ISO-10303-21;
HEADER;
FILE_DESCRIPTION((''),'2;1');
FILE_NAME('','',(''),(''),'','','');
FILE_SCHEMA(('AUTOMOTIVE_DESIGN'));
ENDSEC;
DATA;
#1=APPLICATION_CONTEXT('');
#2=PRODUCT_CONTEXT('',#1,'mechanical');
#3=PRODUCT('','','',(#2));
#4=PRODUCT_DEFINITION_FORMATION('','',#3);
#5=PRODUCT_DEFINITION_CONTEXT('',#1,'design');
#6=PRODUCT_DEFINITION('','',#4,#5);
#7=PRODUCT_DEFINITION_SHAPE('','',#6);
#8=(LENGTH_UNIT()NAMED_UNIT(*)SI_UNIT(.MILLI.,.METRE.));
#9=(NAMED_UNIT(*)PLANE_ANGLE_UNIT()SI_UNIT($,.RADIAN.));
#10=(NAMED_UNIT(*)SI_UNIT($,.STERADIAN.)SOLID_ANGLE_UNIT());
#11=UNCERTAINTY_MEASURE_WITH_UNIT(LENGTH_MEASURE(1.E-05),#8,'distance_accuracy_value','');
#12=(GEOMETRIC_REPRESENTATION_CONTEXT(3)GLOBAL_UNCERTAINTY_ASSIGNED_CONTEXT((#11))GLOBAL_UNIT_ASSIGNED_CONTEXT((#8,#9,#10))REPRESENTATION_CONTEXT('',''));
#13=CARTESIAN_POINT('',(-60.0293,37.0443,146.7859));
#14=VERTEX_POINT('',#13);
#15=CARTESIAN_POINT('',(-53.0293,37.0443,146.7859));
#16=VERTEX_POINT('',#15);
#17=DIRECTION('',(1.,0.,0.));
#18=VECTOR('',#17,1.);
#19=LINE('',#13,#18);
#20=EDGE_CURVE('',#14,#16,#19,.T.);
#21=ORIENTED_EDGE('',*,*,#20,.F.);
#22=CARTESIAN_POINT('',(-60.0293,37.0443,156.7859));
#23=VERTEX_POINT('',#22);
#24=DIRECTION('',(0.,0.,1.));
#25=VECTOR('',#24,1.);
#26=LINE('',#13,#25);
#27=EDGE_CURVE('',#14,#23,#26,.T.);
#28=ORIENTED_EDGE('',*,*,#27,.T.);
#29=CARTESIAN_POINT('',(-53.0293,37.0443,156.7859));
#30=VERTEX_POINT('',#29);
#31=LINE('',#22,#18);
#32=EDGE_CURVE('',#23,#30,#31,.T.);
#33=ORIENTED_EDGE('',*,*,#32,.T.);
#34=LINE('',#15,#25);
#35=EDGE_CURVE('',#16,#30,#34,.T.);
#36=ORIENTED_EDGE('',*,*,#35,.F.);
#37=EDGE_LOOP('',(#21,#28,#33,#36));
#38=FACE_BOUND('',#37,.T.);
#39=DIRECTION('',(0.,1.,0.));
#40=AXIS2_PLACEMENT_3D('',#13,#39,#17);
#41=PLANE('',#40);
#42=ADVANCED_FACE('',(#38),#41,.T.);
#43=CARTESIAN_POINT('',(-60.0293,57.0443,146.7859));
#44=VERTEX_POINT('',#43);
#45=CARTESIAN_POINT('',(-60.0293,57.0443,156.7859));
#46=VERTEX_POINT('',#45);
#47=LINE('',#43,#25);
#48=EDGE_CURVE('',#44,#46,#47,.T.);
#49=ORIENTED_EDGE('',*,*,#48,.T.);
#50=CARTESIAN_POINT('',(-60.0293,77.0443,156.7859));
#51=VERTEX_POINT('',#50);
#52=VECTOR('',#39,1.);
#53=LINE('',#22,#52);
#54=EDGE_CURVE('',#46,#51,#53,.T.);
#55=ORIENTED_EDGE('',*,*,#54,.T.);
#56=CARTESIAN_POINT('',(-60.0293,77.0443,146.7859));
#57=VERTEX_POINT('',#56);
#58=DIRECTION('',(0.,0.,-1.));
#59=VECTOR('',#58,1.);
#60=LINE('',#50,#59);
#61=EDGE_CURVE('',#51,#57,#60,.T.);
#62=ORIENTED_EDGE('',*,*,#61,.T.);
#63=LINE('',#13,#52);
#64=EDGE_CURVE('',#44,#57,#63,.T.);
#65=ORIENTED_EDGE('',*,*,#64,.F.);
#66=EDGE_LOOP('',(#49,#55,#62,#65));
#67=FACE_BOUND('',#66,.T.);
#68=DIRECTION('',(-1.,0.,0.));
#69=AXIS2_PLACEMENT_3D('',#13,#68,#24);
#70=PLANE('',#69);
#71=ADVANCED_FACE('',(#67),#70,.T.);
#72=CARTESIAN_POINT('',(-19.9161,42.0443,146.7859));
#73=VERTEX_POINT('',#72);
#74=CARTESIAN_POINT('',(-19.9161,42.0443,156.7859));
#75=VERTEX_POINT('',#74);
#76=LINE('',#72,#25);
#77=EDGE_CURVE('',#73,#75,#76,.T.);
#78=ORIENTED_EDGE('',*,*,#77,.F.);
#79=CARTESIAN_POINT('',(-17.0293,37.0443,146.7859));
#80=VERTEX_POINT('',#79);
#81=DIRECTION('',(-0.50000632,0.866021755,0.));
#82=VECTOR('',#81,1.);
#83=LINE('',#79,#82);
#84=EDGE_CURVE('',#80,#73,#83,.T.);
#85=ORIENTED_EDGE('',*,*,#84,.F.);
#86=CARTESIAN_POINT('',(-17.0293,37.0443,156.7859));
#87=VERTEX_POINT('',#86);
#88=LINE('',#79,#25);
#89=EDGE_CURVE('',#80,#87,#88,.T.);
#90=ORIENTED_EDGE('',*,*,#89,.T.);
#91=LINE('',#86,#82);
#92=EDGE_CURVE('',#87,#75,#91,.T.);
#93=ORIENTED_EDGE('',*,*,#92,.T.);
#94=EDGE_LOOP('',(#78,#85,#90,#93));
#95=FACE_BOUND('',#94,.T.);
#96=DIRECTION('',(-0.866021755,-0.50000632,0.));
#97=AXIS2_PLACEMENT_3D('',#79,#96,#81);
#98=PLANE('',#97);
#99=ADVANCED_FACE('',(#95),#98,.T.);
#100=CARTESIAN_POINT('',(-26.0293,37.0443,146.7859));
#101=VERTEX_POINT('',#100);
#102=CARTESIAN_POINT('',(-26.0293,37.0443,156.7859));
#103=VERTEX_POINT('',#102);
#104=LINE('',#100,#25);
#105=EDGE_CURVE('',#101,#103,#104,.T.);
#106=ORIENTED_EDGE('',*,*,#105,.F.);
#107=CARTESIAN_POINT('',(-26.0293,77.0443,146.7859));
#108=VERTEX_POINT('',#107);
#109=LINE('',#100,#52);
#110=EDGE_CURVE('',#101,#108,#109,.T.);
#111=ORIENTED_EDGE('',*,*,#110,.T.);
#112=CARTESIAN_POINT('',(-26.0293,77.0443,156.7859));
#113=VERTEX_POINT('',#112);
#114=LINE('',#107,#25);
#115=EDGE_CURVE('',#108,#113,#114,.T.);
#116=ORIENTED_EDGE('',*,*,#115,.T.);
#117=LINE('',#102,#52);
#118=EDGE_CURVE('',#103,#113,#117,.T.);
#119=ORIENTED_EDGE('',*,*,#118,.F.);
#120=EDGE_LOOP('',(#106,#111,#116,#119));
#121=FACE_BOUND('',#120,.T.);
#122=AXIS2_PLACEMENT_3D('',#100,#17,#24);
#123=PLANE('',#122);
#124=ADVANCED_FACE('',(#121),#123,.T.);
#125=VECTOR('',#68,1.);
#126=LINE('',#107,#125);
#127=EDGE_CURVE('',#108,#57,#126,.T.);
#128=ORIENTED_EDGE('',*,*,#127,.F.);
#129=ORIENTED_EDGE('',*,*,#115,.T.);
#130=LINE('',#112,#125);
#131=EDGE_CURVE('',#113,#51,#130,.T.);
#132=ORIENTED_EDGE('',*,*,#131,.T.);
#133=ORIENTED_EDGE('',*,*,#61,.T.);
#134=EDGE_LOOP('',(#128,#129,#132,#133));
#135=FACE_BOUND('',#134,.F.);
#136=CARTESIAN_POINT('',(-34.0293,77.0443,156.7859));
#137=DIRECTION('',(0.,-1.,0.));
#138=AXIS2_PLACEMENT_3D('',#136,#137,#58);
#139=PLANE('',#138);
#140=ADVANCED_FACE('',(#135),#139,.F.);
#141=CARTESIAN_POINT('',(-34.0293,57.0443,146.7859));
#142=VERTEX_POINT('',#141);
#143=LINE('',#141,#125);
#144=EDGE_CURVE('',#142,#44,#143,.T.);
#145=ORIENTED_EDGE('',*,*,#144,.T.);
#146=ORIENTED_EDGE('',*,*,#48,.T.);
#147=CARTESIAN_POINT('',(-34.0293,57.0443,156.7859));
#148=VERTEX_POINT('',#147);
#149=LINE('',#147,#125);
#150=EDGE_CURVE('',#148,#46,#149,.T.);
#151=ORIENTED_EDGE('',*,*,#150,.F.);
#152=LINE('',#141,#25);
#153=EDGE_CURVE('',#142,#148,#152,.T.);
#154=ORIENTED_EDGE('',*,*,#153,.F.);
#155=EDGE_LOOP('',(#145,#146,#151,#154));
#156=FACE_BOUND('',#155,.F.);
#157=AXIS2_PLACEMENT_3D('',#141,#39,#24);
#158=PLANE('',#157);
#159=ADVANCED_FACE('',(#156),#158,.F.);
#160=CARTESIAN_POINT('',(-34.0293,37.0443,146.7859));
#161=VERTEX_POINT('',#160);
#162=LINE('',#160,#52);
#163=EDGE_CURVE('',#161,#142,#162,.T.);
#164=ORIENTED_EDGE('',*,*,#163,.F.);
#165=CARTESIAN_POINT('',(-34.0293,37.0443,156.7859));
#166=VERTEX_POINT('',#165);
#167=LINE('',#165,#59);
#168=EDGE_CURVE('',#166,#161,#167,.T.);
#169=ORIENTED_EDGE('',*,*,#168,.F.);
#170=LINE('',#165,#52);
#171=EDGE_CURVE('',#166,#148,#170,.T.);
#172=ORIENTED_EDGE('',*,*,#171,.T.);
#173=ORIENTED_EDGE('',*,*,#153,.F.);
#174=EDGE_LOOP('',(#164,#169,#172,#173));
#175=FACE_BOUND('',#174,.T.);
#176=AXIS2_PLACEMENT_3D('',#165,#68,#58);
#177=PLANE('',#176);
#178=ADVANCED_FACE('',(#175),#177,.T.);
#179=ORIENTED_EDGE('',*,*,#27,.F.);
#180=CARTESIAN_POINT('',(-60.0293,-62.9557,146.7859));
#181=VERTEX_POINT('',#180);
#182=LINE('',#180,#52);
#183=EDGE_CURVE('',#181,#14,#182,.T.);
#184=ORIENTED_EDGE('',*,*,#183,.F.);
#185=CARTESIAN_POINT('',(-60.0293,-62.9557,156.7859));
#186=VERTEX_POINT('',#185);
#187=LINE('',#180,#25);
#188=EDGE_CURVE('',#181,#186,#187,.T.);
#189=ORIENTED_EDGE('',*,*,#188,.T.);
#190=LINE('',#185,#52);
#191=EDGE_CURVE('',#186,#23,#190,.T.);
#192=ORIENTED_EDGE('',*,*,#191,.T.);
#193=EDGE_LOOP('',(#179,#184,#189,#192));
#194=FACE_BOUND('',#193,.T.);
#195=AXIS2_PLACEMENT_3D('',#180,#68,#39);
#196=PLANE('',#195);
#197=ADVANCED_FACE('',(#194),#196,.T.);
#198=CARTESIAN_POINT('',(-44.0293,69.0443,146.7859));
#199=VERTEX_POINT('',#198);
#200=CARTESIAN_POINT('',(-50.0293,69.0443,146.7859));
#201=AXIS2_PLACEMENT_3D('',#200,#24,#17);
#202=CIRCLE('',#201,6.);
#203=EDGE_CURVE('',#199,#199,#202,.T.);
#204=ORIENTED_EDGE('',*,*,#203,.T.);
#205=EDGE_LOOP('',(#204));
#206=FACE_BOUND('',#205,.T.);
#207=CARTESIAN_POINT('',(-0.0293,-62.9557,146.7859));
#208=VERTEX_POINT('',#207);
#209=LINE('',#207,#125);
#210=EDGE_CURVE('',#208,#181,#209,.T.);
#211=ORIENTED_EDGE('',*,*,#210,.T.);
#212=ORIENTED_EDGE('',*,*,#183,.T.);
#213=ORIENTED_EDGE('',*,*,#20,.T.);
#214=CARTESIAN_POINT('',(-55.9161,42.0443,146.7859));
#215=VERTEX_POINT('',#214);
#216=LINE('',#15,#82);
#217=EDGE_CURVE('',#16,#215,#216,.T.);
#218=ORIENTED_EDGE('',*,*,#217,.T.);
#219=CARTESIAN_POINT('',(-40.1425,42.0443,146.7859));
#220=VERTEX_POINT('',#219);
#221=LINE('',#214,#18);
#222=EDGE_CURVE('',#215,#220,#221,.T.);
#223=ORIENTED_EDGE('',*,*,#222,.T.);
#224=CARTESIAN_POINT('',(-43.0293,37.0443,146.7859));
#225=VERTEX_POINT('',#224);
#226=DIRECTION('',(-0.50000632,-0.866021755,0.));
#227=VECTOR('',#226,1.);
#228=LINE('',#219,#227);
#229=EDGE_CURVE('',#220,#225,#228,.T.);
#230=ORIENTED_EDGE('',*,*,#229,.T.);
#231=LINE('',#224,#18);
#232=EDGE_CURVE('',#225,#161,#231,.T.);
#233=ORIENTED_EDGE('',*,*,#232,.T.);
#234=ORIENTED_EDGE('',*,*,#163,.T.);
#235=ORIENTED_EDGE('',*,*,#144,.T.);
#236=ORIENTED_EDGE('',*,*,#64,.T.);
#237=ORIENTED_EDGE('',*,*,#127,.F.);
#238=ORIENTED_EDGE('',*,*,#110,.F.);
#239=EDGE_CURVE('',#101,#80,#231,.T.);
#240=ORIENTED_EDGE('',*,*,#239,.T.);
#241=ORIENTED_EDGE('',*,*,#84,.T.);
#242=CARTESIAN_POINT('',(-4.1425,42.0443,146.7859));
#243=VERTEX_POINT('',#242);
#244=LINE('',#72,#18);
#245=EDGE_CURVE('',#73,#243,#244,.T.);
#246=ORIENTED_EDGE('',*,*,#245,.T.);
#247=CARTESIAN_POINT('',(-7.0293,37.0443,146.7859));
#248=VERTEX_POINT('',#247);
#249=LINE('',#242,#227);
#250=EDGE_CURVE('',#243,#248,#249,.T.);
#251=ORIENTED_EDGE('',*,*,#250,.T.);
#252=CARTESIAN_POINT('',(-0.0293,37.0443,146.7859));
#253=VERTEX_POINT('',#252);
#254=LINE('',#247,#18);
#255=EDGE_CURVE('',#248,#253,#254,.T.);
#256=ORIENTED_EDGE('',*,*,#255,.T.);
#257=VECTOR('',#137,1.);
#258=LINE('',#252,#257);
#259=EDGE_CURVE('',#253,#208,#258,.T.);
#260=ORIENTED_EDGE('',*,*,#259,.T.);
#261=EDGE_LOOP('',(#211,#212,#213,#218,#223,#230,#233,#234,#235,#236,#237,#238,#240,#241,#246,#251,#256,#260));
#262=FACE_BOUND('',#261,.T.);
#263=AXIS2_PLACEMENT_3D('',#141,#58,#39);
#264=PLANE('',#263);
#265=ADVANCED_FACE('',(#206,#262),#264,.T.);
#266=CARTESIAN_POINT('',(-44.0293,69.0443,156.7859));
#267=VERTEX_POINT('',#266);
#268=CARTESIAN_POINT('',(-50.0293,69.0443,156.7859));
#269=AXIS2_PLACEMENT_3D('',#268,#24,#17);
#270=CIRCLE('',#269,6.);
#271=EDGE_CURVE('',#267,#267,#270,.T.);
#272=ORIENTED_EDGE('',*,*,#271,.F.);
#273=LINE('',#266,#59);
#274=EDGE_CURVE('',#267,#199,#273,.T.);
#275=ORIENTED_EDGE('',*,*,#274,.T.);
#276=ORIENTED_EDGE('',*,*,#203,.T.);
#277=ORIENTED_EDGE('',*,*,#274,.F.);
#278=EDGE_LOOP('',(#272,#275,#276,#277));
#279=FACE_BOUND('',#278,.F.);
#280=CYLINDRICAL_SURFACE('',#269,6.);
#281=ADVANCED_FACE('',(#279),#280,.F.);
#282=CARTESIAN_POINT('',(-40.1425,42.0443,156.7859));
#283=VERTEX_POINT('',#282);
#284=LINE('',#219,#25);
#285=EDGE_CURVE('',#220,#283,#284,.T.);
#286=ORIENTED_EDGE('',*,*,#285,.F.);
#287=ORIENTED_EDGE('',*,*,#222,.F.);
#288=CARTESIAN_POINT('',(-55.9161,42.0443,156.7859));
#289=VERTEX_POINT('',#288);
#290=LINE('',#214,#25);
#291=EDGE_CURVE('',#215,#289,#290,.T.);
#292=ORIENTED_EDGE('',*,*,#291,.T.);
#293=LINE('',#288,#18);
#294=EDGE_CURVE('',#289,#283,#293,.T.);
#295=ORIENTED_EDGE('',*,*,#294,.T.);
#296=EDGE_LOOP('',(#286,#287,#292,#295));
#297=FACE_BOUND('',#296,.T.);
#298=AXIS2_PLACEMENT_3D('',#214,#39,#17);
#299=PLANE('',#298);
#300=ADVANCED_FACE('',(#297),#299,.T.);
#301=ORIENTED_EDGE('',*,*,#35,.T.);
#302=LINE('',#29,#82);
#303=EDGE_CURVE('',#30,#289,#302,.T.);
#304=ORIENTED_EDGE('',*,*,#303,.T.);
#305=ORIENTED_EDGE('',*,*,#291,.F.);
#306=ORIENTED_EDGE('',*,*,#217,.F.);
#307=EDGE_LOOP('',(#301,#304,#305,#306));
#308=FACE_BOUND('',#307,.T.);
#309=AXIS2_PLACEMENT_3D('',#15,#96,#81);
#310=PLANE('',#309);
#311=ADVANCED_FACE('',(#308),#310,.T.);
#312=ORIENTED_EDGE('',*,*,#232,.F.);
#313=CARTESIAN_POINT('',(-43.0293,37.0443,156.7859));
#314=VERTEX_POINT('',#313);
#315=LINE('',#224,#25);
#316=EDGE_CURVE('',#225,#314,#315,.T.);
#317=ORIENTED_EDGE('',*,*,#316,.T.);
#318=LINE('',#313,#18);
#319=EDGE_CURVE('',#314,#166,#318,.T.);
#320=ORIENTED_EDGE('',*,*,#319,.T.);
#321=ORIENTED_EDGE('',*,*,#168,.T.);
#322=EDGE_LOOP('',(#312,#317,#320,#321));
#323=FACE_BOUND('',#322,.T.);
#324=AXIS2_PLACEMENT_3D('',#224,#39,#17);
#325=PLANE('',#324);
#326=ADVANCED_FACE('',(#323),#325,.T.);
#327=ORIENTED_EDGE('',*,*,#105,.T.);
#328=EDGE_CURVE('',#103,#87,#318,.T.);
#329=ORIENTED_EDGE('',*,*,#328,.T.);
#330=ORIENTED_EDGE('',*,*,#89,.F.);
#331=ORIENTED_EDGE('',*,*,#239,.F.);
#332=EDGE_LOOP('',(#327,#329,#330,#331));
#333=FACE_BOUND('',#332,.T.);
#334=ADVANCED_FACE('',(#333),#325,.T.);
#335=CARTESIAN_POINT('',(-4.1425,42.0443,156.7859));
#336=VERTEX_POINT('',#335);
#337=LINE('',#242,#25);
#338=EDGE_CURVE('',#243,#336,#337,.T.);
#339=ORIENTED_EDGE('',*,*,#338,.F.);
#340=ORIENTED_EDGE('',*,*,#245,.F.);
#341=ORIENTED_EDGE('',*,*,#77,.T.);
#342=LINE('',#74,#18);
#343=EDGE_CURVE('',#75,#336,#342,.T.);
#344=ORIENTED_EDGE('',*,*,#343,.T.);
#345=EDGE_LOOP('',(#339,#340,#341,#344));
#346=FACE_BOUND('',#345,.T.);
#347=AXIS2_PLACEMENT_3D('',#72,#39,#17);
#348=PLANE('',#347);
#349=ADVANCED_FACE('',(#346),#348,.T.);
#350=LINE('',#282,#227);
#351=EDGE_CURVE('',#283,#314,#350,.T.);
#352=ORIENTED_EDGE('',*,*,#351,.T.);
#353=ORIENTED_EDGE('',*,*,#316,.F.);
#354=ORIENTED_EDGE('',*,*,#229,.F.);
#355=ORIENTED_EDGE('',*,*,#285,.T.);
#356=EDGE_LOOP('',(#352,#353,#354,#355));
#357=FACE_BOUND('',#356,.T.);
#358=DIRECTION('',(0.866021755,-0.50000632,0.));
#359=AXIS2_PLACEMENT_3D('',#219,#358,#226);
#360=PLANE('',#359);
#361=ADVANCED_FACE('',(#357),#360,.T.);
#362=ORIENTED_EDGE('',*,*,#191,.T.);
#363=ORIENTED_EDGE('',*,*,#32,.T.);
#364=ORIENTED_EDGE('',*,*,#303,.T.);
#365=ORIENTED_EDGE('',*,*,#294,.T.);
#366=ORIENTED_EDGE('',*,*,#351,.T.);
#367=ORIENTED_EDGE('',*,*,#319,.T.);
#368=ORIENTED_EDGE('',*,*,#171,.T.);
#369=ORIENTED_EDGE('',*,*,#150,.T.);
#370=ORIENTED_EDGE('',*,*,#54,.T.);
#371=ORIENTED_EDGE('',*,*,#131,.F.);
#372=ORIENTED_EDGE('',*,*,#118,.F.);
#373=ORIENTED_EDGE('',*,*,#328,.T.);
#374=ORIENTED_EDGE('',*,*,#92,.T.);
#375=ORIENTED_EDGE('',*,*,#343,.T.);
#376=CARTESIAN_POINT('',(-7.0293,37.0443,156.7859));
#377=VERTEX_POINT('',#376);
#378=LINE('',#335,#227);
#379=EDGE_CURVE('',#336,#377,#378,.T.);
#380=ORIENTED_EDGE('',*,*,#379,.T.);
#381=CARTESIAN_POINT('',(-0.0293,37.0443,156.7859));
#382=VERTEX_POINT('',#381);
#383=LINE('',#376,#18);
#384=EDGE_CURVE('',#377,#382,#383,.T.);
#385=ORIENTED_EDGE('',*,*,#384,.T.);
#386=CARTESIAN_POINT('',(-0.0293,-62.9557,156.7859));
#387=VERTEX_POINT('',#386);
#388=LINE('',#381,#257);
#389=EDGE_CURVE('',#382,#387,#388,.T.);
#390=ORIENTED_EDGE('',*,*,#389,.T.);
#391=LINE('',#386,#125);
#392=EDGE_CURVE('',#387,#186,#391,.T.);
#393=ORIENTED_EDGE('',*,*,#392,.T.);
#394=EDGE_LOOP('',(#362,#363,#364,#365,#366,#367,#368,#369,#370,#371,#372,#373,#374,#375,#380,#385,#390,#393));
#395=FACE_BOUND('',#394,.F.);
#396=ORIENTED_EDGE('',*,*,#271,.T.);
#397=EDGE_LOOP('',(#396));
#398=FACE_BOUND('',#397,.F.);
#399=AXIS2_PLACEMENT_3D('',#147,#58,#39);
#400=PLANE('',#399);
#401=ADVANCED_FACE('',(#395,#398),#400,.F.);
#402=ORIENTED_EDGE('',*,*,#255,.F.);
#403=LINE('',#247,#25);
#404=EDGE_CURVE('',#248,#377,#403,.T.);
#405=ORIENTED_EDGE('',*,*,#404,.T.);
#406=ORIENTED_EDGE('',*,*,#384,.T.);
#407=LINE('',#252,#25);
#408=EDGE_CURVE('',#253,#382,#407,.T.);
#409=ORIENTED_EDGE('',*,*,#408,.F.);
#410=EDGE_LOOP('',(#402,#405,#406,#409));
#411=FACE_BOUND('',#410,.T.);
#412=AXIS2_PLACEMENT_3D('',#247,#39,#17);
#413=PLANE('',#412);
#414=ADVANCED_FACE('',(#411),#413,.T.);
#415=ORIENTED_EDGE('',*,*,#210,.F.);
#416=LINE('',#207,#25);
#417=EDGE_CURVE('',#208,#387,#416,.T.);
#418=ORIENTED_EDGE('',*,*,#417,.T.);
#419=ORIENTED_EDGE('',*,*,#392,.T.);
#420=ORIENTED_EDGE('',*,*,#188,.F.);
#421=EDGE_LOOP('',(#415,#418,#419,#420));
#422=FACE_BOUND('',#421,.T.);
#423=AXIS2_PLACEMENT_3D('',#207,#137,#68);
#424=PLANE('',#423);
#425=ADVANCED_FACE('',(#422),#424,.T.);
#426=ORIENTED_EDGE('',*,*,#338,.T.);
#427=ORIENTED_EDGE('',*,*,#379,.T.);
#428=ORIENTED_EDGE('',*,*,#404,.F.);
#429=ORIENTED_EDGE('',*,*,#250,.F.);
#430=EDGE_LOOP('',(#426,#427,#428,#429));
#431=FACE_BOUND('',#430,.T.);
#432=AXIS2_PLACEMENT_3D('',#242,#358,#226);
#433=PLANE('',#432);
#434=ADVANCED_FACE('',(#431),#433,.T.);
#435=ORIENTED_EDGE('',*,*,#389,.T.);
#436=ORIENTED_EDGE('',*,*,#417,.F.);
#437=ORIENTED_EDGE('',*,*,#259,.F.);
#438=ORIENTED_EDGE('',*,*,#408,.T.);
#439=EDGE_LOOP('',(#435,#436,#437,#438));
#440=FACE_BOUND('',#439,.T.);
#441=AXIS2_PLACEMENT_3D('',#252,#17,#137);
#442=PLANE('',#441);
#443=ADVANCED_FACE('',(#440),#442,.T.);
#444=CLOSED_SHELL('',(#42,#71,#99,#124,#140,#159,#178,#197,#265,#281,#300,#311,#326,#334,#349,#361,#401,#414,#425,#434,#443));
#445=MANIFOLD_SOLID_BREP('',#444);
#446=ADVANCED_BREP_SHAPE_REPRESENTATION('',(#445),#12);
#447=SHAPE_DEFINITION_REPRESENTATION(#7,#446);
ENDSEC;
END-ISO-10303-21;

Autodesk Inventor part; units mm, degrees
ref_plane "YZ Plane" through (0, 0, 0) normal (1, 0, 0) x (0, 1, 0)
ref_plane "XZ Plane" through (0, 0, 0) normal (0, 1, 0) x (-1, 0, 0)
ref_plane "Work Plane1" through (-60.0293, 37.0443, 146.7859) normal (0, 0, 1) x (1, 0, 0)
sketch "Sketch1" plane through (-60.0293, 37.0443, 146.7859) normal (0, 0, 1) x (1, 0, 0)
  line L0 (55.8868, 5) -> (53, 0) projected
  line L1 (53, 0) -> (60, 0) projected
  line L2 (60, 0) -> (60, 10) projected
  line L3 (20, 10) -> (60, 10) projected
  line L4 (20, 10) -> (20, 40) projected
  line L5 (0, 40) -> (20, 40) projected
  line L6 (0, 0) -> (0, 40) projected
  line L7 (0, 0) -> (7, 0) projected
  line L8 (7, 0) -> (4.1132, 5) projected
  line L9 (4.1132, 5) -> (19.8868, 5) projected
  line L10 (19.8868, 5) -> (17, 0) projected
  line L11 (17, 0) -> (43, 0) projected
  line L12 (43, 0) -> (40.1132, 5) projected
  line L13 (40.1132, 5) -> (55.8868, 5) projected
  circle A0 centre (10, 32) radius 6 projected
  line L14 (0, 0) -> (60, 0)
  line L15 (60, 0) -> (60, -100)
  line L16 (60, -100) -> (0, -100)
  line L17 (0, -100) -> (0, 0)
  point P0 (60.0293, -37.0443)
  dimension "d0" = 60
  dimension "d1" = 100
extrude "Extrusion1" add sketch "Sketch1" along normal blind 10 contours L0 L14 L12 L13 | L1 L15 L16 L17 L7 L14 L11 | L14 L8 L9 L10
sketch "Sketch2" plane through (-43.0293, 37.0443, 146.7859) normal (0, 1, 0) x (1, 0, 0)
  line L0 (17, -10) -> (9, -10)
  line L1 (9, -10) -> (9, 0)
  line L2 (9, 0) -> (17, 0)
  line L3 (17, 0) -> (17, -10)
  line L4 (17, -10) -> (9, 0) construction
  line L5 (9, -10) -> (17, 0) construction
  line L6 (55.0352, 0) -> (-29.0059, 0) projected
  line L7 (43, 0) -> (43, -10) projected
  point P0 (43.0293, 146.7859)
  point P1 (13, -5)
  dimension "d4" = 8
  dimension "d5" = 10
  dimension "d6" = 0
  dimension "d9" = 30
extrude "Extrusion2" add sketch "Sketch2" along normal up to surface (40 mm away)
sketch "Sketch3" plane through (-34.0293, 37.0443, 146.7859) normal (-1, 0, 0) x (0, 0, 1)
  line L0 (10, 40) -> (0, 40) projected
  line L1 (0, 0) -> (0, 40) projected
  line L2 (10, 0) -> (0, 0) projected
  line L3 (10, 0) -> (10, 40) projected
  line L4 (0, 0) -> (0, 40) projected
  line L5 (0, 20) -> (10, 20)
  point P0 (-146.7859, -37.0443)
  point P1 (0, 20)
  dimension "d10" = 20
ref_plane "Work Plane2" through (-60.0293, 37.0443, -153.2141) normal (-1, 0, 0) x (0, 0, 1)
extrude "Extrusion3" add sketch "Sketch3" along normal up to surface (26 mm away) contours L3 L5 L1 L0
sketch "Sketch4" plane through (-60.0293, 37.0443, 156.7859) normal (0, 0, 1) x (1, 0, 0)
  circle A0 centre (10, 32) radius 6 projected
  point P0 (60.0293, -37.0443)
extrude "Extrusion4" cut sketch "Sketch4" against normal through all
thread "Thread1" size "M8x1.25" class "6H" standard "ANSI Metric M Profile" length 140
properties part number "jaws"
